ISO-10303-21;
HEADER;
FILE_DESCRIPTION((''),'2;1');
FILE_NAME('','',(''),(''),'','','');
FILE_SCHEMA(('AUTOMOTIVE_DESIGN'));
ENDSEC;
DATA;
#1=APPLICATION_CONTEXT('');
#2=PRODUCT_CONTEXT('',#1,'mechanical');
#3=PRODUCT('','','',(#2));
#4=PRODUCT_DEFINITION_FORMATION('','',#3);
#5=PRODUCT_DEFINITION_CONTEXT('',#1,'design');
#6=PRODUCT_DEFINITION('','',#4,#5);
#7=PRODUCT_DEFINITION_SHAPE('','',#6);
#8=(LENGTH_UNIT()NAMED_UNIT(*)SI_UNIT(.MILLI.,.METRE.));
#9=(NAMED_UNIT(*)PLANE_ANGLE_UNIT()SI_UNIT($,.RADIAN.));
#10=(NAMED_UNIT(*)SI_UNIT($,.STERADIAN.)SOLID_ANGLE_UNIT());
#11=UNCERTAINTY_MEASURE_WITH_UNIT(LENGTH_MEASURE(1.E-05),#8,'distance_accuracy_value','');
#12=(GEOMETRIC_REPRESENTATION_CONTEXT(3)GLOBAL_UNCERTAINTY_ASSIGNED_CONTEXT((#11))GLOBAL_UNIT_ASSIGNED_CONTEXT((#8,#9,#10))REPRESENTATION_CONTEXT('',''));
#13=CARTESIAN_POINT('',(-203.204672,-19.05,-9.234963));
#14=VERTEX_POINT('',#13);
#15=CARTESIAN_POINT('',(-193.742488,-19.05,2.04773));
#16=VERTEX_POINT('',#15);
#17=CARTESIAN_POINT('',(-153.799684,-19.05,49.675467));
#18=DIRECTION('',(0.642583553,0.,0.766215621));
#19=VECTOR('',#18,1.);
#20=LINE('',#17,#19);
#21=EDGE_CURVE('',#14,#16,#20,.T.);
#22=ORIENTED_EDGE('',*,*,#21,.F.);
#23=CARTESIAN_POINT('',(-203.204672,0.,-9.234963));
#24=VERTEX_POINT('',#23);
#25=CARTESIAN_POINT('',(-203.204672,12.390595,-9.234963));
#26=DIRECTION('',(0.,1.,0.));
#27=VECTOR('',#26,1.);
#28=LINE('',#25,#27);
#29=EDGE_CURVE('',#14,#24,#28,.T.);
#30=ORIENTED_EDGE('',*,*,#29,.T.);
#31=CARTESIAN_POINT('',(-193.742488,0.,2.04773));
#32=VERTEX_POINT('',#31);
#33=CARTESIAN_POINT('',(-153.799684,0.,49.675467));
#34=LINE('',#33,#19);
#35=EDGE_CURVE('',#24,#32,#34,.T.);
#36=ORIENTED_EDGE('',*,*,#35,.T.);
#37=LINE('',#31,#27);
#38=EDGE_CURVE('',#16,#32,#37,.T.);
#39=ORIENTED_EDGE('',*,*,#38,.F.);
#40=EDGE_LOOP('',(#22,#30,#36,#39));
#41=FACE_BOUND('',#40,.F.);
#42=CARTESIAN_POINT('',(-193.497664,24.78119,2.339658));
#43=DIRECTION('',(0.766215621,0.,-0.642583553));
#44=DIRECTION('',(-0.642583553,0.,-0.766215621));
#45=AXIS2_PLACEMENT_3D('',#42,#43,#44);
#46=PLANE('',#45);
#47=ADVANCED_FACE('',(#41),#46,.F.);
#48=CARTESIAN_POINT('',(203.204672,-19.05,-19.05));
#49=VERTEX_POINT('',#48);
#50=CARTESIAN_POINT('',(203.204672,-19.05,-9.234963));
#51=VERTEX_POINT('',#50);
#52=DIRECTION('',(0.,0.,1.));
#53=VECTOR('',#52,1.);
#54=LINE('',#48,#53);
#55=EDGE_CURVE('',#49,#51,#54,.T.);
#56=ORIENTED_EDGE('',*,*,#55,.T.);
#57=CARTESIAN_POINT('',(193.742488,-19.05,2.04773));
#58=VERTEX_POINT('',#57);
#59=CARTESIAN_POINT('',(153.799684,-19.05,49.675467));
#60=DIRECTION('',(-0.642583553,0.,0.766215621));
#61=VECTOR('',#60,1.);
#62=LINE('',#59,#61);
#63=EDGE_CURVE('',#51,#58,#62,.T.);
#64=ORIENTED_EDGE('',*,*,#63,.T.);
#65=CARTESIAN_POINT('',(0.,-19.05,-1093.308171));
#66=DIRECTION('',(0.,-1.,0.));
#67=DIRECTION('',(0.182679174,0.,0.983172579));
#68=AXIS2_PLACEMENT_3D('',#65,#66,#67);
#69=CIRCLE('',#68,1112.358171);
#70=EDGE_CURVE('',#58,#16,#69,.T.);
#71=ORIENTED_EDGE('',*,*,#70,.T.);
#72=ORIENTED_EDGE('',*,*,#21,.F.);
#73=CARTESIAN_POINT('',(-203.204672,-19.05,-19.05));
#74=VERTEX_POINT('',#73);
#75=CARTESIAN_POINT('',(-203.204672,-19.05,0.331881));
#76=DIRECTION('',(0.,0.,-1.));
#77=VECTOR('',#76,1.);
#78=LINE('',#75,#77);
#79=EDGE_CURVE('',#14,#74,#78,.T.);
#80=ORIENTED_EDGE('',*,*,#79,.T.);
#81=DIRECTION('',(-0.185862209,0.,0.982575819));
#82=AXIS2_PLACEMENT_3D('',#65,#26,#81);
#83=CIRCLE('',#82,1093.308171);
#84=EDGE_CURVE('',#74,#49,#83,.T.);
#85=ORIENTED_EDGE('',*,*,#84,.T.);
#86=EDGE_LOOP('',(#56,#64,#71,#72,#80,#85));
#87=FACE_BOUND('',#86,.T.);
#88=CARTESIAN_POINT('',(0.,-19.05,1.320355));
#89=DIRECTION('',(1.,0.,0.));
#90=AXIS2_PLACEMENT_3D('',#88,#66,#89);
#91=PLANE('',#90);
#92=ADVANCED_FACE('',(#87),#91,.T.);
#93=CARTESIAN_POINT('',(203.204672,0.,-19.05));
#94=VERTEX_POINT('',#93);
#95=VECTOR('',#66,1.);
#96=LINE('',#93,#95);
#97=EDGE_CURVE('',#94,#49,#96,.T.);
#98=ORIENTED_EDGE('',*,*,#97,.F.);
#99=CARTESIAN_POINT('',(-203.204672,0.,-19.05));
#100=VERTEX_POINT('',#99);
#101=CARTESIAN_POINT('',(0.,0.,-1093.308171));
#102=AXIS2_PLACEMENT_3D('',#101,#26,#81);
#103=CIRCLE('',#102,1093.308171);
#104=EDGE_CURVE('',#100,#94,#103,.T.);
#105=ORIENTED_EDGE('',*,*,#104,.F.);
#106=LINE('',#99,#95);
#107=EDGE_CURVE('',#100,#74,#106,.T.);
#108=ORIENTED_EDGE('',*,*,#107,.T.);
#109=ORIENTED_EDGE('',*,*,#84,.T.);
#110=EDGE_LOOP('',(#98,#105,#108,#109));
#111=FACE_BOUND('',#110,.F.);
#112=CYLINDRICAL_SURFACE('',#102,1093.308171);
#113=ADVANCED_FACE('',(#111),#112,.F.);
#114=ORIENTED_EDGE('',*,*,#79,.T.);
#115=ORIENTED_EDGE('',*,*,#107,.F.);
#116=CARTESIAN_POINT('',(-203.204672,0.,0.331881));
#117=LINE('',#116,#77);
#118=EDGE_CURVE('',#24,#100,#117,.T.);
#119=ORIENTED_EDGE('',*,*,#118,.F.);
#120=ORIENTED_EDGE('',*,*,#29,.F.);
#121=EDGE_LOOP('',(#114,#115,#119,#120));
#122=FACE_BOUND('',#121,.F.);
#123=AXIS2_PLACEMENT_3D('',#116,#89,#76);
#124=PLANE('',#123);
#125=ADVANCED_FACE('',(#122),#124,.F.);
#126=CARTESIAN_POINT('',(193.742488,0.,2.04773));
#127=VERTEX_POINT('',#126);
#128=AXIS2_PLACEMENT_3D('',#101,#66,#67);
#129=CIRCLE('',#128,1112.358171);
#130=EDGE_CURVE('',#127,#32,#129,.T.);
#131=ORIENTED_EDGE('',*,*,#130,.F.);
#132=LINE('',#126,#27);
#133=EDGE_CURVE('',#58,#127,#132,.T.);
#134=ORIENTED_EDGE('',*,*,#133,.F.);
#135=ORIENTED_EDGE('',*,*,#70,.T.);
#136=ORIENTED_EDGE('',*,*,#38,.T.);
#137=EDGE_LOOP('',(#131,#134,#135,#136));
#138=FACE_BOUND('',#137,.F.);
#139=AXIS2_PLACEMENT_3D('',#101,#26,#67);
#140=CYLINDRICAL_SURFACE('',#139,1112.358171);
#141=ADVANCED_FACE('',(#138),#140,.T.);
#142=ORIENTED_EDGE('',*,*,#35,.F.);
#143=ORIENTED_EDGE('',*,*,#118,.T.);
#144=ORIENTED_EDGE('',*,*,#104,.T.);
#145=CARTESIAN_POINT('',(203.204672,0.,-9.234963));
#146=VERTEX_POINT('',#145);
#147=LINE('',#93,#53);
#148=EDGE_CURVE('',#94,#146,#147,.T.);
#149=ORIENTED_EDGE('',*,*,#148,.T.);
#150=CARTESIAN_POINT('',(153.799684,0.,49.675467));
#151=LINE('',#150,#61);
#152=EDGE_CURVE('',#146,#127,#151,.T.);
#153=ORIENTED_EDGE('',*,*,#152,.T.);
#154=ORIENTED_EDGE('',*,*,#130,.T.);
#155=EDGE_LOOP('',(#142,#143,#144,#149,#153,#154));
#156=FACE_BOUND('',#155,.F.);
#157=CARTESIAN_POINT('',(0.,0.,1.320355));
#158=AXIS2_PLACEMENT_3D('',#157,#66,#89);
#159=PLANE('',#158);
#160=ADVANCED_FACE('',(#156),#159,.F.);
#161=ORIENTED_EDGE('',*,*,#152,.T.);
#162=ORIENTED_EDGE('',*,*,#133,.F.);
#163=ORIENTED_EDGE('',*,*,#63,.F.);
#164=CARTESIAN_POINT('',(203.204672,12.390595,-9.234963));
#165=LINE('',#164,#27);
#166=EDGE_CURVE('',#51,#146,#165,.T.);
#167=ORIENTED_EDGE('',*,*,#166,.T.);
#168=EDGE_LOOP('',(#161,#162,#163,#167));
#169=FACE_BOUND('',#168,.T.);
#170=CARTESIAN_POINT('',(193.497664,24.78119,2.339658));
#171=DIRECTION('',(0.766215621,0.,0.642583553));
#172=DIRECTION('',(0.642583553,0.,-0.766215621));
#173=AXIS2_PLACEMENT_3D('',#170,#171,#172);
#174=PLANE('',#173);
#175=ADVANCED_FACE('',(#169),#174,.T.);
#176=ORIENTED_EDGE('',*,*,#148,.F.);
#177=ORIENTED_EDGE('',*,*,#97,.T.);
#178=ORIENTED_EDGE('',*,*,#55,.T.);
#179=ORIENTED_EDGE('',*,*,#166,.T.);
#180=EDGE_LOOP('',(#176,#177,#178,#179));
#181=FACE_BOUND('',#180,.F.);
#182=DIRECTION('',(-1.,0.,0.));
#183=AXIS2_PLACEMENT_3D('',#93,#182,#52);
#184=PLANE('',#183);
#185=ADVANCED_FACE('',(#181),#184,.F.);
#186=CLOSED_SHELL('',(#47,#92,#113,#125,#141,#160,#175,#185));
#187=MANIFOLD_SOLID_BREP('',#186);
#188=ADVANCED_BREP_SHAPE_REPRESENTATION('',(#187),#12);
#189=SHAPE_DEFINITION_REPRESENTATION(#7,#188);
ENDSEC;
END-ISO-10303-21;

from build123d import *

# Parameters (mm, degrees)
F1_DEPTH    = 19.05
F2_T1_DEPTH = 68.6123794065


# Not quite as in the source:
# - a fillet or chamfer that OpenCascade refuses, or shapes differently, is made with other operations: its cross-section is extruded or revolved along the edge and cut away or added


with BuildPart() as f1:
    # F0 (on Front) → F1 (new body)
    with BuildSketch(Plane.XZ):
        with BuildLine():
            ThreePointArc((-203.2046722501, -19.05), (0, 0), (203.2046722501, -19.05))
            Line((203.2046722501, -19.05), (203.2046722501, 0.3318805247))
            ThreePointArc((203.2046722501, 0.3318805247), (0, 19.0500002354), (-203.2046722501, 0.3318805247))
            Line((-203.2046722501, 0.3318805247), (-203.2046722501, -19.05))
        make_face()
    extrude(amount=F1_DEPTH)

    # F2: chamfer of 9.525 on 2 edges, made by hand

    # F2_s2 → F2_t1 (cut)
    with BuildSketch(Plane.XZ.offset(-24.7811897032)):
        with BuildLine():
            Line((-193.4976640556, 2.339657905), (-203.4494965837, -9.5268916064))
            Line((-203.4494965837, -9.5268916064), (-203.6399965837, -9.5268916064))
            ThreePointArc((-203.6399965837, -9.5268916064), (-203.3951722501, -4.5975055408), (-203.3951722501, 0.3318805247))
            Line((-203.3951722501, 0.3318805247), (-203.2394726328, 0.5191749009))
            ThreePointArc((-203.2394726328, 0.5191749009), (-198.3652719444, 1.4136040473), (-193.5308439656, 2.5272461338))
            Line((-193.5308439656, 2.5272461338), (-193.4976640556, 2.339657905))
        make_face()
        with BuildLine():
            Line((193.4976640556, 2.339657905), (203.4494965837, -9.5268916064))
            Line((203.4494965837, -9.5268916064), (203.6399965837, -9.5268916064))
            ThreePointArc((203.6399965837, -9.5268916064), (203.3951722501, -4.5975055408), (203.3951722501, 0.3318805247))
            Line((203.3951722501, 0.3318805247), (203.2394726328, 0.5191749009))
            ThreePointArc((203.2394726328, 0.5191749009), (198.3652719444, 1.4136040473), (193.5308439656, 2.5272461338))
            Line((193.5308439656, 2.5272461338), (193.4976640556, 2.339657905))
        make_face()
    extrude(amount=F2_T1_DEPTH, mode=Mode.SUBTRACT)


solid = f1.part
